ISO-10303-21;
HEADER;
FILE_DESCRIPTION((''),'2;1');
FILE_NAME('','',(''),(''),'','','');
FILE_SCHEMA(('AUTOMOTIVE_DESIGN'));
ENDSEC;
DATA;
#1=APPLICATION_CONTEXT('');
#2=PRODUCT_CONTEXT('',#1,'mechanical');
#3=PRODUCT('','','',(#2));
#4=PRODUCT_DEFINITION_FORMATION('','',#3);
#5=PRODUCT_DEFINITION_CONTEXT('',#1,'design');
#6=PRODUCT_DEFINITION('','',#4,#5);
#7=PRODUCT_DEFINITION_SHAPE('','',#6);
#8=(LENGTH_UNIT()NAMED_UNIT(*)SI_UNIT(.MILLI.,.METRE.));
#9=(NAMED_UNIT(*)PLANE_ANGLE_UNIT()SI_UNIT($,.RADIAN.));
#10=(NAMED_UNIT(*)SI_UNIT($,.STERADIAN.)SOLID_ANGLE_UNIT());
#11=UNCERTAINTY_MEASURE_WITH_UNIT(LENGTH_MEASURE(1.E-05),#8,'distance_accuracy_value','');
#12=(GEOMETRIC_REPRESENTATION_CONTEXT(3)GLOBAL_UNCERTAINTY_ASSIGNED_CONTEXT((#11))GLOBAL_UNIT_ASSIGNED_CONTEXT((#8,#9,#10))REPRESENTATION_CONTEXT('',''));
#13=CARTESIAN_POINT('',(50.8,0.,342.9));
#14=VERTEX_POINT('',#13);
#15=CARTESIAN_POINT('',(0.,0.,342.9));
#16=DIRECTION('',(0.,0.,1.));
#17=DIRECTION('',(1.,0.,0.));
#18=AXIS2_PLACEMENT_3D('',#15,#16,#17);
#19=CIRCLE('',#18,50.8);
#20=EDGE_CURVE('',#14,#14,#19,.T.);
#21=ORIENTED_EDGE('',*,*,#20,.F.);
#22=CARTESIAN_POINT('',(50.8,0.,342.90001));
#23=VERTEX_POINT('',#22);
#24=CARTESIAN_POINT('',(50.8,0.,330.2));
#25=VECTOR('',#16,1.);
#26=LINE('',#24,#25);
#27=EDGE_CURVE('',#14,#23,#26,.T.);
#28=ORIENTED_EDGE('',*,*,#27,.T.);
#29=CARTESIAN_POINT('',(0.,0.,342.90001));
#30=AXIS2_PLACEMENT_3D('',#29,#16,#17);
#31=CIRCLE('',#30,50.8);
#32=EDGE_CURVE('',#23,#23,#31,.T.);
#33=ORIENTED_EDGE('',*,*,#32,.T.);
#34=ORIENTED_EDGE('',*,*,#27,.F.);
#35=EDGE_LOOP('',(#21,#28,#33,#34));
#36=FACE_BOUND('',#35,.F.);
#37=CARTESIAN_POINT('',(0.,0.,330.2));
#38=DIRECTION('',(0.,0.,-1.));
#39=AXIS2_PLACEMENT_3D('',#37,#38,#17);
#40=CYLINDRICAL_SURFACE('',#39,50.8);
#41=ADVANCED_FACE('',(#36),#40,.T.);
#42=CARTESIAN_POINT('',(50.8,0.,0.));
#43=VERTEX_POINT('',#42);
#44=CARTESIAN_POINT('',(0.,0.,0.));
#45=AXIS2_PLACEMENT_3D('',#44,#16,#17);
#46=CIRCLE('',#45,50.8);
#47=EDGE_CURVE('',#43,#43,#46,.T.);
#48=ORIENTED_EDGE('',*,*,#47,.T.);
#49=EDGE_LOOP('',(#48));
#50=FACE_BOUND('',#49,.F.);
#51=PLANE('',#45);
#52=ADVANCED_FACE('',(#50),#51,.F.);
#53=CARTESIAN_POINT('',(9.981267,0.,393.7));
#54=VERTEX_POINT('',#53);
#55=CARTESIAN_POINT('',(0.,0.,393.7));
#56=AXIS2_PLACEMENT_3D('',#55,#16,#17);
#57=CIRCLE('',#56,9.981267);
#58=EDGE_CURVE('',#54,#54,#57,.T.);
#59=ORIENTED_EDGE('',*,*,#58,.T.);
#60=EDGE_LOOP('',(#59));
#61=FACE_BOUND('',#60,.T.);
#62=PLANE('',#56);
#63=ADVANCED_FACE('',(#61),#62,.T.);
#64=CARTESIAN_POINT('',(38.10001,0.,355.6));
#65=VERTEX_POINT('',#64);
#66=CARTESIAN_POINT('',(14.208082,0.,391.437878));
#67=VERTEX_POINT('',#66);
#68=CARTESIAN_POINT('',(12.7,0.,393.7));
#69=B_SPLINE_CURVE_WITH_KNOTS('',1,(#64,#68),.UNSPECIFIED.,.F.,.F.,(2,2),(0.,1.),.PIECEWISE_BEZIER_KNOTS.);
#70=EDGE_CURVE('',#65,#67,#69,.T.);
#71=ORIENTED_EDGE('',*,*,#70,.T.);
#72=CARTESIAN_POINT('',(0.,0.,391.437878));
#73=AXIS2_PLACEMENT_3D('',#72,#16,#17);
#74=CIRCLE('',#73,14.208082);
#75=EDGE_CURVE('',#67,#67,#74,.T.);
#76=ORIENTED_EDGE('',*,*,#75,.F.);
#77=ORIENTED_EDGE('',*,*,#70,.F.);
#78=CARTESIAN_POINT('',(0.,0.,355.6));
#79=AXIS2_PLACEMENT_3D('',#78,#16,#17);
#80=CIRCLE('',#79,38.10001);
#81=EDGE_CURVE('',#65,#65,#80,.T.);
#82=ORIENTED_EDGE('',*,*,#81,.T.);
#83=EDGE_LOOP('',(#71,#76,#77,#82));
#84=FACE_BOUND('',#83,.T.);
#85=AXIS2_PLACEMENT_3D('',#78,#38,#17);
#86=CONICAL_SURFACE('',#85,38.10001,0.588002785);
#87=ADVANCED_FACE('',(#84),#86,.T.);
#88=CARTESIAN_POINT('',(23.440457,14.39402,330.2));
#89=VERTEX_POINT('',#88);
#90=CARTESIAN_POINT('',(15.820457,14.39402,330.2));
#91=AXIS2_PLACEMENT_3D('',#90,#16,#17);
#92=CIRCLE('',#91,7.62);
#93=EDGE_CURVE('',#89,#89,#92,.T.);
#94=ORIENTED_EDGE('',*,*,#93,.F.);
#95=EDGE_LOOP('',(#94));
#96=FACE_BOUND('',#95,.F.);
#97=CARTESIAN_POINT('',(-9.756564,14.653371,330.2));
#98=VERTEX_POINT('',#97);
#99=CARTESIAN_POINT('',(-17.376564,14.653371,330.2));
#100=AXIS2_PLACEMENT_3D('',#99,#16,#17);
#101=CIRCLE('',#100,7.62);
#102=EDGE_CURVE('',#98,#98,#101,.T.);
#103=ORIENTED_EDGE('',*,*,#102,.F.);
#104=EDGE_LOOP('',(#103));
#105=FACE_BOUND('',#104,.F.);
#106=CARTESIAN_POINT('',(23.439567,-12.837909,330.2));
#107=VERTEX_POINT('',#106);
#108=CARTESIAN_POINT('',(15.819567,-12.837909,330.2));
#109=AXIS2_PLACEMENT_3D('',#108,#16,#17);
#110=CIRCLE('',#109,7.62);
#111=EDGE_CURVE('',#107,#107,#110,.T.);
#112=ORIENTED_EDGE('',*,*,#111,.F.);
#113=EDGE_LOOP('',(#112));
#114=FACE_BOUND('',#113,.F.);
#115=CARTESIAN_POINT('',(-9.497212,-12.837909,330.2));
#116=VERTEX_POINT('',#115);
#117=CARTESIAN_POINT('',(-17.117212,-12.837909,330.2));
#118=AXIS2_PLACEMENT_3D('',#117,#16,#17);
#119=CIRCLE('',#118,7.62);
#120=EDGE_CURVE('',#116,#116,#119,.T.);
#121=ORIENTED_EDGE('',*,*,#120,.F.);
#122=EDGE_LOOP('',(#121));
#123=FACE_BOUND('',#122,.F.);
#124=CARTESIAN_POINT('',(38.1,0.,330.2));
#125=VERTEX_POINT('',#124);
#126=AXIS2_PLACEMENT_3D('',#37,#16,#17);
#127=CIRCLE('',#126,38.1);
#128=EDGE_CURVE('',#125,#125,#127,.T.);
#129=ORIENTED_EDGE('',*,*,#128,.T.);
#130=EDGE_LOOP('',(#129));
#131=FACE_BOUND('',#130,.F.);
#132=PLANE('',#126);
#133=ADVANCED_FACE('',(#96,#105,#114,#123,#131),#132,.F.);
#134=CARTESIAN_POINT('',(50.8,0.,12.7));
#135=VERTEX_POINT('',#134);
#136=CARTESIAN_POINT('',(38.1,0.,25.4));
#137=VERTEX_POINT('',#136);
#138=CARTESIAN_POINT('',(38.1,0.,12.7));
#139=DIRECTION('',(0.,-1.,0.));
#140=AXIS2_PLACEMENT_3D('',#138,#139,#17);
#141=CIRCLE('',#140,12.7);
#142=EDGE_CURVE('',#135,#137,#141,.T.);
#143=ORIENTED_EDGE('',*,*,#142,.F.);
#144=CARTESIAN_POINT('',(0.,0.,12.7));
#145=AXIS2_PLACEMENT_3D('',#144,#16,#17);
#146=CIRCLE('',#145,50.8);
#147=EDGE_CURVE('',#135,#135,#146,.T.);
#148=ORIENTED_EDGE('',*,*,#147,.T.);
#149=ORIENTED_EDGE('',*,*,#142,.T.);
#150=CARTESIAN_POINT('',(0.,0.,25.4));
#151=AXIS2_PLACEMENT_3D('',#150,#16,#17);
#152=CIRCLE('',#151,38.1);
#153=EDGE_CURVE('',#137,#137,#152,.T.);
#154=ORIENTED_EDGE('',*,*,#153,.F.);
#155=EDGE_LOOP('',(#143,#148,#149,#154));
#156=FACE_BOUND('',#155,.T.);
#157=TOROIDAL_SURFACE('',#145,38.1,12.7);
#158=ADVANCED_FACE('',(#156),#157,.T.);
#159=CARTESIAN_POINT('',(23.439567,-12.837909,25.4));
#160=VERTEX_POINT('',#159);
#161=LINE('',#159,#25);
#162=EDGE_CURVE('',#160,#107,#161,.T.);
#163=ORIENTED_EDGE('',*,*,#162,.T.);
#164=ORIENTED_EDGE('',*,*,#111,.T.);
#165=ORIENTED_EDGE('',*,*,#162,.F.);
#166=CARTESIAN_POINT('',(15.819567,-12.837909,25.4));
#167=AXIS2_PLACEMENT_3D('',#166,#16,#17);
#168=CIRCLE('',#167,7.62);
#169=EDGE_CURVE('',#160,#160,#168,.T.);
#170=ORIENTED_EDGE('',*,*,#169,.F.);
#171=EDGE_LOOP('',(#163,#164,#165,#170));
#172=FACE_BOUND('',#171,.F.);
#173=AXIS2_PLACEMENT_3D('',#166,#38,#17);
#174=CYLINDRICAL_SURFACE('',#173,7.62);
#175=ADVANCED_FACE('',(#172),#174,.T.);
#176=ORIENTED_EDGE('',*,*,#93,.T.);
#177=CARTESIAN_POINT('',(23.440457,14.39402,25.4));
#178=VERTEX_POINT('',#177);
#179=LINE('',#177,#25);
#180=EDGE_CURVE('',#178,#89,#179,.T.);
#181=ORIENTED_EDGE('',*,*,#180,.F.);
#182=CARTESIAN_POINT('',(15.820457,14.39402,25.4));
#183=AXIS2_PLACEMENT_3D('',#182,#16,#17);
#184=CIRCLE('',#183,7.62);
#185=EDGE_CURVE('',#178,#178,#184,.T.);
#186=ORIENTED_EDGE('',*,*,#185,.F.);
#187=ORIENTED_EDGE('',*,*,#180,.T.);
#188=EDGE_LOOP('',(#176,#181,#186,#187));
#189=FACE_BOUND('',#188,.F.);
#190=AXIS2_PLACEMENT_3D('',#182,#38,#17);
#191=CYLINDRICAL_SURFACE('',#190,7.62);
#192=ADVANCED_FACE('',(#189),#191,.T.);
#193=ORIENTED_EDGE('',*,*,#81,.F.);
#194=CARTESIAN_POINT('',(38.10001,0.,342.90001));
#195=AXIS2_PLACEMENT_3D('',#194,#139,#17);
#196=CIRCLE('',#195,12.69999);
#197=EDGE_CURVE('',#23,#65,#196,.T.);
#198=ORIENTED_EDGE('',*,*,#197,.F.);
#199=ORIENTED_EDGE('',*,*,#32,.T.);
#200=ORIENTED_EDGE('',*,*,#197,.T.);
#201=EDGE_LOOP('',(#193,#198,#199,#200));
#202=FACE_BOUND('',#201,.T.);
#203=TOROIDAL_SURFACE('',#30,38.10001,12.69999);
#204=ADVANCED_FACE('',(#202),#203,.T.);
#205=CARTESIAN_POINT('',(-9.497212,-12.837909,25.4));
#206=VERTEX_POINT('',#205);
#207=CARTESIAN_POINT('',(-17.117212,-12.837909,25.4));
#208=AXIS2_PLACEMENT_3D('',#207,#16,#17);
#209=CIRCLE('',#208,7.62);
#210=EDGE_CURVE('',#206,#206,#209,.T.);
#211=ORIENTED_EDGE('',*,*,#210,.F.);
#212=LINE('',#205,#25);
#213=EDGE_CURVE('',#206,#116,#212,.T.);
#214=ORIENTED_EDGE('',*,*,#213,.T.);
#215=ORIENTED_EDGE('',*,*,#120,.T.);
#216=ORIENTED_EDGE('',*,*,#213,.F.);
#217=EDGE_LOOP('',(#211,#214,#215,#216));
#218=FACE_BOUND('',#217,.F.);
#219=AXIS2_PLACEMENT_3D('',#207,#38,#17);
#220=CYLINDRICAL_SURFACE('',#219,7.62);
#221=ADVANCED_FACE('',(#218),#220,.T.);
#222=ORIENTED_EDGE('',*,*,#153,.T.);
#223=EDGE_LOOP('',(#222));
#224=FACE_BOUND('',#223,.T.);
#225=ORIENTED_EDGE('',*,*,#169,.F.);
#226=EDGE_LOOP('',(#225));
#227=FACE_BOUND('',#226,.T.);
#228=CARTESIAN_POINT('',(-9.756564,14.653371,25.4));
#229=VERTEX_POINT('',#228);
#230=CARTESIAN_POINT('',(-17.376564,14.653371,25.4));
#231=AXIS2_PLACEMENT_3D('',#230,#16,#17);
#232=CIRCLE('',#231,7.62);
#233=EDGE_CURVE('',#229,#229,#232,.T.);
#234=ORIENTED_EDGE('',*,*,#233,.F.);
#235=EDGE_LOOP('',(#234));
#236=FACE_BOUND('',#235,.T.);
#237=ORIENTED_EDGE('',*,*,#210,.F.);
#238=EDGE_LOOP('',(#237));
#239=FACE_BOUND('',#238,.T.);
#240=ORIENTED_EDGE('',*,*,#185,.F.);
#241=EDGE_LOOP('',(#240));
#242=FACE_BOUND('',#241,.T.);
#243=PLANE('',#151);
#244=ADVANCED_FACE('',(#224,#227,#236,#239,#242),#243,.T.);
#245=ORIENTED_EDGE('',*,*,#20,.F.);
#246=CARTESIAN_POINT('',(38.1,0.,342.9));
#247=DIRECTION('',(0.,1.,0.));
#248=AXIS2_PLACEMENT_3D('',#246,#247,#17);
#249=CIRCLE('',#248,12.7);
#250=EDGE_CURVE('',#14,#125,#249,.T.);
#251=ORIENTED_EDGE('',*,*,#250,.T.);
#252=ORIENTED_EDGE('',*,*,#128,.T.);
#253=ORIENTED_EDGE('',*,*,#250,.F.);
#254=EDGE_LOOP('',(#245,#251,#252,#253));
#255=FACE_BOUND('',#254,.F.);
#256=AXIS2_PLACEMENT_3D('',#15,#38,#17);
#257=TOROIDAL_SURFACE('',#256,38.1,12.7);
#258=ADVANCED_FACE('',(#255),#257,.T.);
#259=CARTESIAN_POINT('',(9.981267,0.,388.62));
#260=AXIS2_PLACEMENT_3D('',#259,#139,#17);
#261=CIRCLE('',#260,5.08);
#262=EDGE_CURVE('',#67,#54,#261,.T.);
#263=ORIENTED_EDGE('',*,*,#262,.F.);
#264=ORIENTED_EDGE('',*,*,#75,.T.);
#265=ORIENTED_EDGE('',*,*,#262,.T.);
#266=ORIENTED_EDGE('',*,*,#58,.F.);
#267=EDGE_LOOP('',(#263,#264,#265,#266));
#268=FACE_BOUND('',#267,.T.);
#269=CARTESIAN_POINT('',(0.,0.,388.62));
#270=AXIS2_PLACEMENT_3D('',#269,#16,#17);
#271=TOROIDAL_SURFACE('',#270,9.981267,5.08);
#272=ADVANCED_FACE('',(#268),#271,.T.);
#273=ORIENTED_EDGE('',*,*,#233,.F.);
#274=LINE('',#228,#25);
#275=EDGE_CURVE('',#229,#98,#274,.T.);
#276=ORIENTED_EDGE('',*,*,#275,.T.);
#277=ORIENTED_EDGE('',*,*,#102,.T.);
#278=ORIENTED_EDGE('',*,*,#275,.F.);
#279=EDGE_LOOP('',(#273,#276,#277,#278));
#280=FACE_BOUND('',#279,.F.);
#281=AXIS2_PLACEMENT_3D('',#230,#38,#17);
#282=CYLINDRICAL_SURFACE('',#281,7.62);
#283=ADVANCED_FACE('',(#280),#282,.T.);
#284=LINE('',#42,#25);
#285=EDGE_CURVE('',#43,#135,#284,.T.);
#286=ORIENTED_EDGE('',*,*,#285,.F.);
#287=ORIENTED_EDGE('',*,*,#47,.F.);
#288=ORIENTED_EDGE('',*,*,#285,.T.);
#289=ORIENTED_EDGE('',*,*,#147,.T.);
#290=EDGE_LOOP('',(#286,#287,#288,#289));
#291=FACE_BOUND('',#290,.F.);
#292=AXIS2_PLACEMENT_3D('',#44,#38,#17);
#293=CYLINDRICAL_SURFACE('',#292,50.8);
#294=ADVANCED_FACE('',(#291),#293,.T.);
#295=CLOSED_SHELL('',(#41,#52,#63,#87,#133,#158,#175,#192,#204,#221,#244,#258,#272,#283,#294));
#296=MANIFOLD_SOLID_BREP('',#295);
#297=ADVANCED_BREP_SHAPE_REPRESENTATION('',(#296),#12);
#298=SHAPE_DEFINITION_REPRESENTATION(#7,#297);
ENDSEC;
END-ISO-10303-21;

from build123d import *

# Parameters (mm, degrees)
F0_R      = 50.8
F1_DEPTH  = 25.4
F2_R      = 12.7
F3_R      = 7.62
F5_DEPTH  = 304.8
F4_R      = 7.62
F6_DEPTH  = 304.8
F8_R      = 50.8
F9_DEPTH  = 25.4
F10_R     = 12.7
F11_R     = 12.69999
F9_FACE_R = 38.10001
F22_R     = 12.7
F24_R     = 5.08


# Not quite as in the source:
# - a fillet or chamfer is up to 0.001 mm smaller than in the source, because OpenCascade refuses the exact size
# - the program builds the solid bodies; features that only make, move or delete a surface that nothing else refers to are left out


with BuildPart() as f1:
    # F0 (on Top) → F1 (new body)
    with BuildSketch(Plane.XY):
        Circle(F0_R)
    extrude(amount=F1_DEPTH)

    # F2
    f2_edges = [f1.edges().sort_by_distance(p)[0] for p in [
        (-50.8, 0, 25.4),
    ]]
    fillet(f2_edges, radius=F2_R)

    # F3 (on face) → F5 (join)
    with BuildSketch(Plane.XY.offset(25.4)):
        with Locations((-17.3765644431, 14.6533707157)):
            Circle(F3_R)
    extrude(amount=F5_DEPTH)

    # F4 (on face) → F6 (join)
    with BuildSketch(Plane.XY.offset(25.4)):
        with Locations((15.8204566687, 14.3940197304)):
            Circle(F4_R)
        with Locations((15.8195672557, -12.837909162)):
            Circle(F4_R)
        with Locations((-17.1172115952, -12.837909162)):
            Circle(F4_R)
    extrude(amount=F6_DEPTH)

    # F8 (on offset) → F9 (join)
    with BuildSketch(Plane.XY.offset(330.2)):
        Circle(F8_R)
    extrude(amount=F9_DEPTH)

    # F10
    f10_edges = [f1.edges().sort_by_distance(p)[0] for p in [
        (-50.8, 0, 330.2),
    ]]
    fillet(f10_edges, radius=F10_R)

    # F11 (radius 12.7 in the source; OpenCascade refuses exactly that, so slightly less here)
    f11_edges = [f1.edges().sort_by_distance(p)[0] for p in [
        (-50.8, 0, 355.6),
    ]]
    fillet(f11_edges, radius=F11_R)

    # F9_face (on face) → F23 section 0
    with BuildSketch(Plane.XY.offset(355.6)):
        Circle(F9_FACE_R)
    # F22 (on offset) → F23 section 1
    with BuildSketch(Plane.XY.offset(393.7)):
        Circle(F22_R)
    loft()

    # F24
    f24_edges = [f1.edges().sort_by_distance(p)[0] for p in [
        (-12.7, 0, 393.7),
    ]]
    fillet(f24_edges, radius=F24_R)


solid = f1.part
